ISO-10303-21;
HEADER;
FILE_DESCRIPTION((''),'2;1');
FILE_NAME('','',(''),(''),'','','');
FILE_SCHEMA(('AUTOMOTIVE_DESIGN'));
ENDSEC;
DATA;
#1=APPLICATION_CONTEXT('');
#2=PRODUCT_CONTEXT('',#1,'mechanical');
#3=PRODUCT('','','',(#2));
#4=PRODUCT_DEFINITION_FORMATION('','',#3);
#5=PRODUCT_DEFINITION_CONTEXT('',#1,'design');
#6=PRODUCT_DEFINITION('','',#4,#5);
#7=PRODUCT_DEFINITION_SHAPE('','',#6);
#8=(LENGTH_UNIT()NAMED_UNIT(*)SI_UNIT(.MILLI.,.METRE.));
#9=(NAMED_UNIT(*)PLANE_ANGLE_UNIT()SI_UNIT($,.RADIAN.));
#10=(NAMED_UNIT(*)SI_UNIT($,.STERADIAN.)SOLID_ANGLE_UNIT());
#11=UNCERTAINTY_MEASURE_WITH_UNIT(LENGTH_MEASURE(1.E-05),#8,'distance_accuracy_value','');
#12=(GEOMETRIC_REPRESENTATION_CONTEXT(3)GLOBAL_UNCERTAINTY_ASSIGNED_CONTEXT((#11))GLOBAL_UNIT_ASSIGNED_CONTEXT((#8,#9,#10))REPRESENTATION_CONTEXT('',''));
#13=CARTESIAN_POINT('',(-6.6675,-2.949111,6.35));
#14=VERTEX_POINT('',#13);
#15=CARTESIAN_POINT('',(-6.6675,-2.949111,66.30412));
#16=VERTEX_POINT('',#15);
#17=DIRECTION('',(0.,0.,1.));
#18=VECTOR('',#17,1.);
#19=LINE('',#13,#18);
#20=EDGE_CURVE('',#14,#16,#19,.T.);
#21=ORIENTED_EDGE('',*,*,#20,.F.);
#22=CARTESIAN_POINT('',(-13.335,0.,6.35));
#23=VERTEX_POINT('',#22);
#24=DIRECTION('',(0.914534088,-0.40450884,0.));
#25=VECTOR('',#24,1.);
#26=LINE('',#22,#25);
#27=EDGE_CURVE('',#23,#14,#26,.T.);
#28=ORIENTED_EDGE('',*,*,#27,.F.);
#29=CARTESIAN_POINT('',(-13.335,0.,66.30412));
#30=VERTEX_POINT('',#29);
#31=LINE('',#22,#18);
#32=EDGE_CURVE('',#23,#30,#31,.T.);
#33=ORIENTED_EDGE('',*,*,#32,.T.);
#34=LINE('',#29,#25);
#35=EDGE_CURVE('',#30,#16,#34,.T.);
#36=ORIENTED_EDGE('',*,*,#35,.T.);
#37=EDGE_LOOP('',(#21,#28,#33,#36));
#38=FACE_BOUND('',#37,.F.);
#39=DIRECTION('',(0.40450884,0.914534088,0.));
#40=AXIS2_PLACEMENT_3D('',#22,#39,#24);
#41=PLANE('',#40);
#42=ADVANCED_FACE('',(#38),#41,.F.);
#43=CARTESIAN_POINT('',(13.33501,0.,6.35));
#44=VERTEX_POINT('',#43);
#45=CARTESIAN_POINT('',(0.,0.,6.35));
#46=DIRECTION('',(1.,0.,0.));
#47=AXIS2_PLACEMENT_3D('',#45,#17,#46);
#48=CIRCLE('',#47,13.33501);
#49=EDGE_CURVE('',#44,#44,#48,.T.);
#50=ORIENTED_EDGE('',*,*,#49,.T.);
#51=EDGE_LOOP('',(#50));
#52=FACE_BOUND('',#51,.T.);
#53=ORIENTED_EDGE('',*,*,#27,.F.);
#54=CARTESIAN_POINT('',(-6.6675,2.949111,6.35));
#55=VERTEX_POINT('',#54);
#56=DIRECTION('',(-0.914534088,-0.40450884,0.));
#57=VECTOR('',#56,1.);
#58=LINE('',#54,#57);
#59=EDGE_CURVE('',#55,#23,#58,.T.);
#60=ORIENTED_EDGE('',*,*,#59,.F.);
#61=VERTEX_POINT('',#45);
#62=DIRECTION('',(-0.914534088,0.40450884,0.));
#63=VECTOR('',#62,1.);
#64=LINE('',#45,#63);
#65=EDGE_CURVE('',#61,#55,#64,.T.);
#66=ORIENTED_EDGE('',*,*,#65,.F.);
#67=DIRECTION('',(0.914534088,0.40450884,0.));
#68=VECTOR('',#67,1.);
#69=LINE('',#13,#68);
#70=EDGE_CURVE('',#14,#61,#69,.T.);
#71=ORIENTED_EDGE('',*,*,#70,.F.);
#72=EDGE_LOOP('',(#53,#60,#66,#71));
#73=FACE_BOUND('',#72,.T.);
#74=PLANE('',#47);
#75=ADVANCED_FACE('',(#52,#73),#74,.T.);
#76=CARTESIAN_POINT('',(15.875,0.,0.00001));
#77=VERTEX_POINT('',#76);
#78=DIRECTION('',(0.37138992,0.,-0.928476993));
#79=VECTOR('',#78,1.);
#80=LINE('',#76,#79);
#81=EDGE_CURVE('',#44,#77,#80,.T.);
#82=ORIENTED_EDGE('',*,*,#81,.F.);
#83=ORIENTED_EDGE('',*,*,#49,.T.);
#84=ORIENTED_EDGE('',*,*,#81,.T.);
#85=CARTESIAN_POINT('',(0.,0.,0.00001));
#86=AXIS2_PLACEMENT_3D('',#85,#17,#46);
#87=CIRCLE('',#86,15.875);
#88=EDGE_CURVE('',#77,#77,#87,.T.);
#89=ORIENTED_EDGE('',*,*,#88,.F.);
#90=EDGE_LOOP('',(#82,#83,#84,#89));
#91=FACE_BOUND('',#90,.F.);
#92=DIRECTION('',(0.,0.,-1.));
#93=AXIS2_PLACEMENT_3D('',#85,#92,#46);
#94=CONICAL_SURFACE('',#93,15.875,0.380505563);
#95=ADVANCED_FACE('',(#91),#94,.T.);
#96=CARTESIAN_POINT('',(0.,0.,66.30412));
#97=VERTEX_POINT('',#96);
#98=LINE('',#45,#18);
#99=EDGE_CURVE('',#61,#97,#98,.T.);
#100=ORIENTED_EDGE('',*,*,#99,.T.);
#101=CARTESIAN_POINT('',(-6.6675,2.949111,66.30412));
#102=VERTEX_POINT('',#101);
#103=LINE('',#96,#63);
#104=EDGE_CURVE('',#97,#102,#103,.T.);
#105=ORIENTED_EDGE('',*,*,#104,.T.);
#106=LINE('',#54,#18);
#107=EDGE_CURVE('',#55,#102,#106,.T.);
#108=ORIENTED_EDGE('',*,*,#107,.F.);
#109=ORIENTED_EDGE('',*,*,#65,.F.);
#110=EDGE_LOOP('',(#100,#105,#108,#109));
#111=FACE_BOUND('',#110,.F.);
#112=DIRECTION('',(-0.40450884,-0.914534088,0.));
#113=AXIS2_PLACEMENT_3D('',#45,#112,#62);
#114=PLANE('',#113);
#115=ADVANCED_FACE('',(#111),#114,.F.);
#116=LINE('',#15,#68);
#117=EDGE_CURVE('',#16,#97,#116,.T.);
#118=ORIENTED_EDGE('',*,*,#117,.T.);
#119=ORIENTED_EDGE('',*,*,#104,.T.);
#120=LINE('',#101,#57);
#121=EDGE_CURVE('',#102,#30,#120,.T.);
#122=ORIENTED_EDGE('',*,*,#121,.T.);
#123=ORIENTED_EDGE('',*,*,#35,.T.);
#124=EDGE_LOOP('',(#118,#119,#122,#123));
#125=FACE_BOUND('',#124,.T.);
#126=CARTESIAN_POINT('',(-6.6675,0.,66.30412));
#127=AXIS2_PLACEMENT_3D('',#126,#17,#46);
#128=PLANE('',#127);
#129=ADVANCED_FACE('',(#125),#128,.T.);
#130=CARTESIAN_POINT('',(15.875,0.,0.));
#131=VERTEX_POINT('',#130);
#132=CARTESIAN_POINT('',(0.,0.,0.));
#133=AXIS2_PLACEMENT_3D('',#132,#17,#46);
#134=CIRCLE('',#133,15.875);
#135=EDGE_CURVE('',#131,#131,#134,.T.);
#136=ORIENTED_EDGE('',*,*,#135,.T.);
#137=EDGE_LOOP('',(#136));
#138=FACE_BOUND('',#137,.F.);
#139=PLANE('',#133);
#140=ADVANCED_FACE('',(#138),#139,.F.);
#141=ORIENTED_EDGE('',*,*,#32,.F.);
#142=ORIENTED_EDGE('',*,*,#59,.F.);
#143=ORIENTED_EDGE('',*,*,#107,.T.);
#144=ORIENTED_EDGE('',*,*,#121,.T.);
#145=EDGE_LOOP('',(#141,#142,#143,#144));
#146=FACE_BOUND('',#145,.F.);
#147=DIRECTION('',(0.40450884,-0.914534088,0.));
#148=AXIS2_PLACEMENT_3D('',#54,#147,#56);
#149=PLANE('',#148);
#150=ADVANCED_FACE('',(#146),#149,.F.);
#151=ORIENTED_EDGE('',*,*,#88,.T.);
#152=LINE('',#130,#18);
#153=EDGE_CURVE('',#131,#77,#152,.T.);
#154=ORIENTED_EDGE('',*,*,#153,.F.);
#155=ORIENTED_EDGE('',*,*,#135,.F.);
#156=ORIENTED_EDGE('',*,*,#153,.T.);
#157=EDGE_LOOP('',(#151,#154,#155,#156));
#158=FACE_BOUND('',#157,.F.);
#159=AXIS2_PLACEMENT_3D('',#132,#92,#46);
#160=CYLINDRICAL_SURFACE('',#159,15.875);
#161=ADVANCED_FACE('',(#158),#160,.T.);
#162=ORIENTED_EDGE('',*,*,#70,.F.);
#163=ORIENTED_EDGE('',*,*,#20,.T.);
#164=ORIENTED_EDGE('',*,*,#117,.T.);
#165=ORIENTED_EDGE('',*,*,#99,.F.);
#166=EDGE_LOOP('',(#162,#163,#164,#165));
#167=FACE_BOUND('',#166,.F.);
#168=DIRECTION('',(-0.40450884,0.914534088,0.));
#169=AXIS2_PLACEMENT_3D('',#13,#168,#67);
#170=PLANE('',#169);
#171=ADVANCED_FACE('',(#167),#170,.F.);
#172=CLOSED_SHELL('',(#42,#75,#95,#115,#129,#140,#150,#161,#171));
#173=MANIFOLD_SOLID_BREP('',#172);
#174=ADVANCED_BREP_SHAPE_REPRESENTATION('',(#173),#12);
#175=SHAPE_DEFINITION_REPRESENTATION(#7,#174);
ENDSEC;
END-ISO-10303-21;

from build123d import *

# Parameters (mm, degrees)
F0_R     = 15.875
F1_DEPTH = 6.35
F2_SIZE2 = 6.34999
F2_SIZE  = 2.53999
F4_DEPTH = 59.95412


# Not quite as in the source:
# - a fillet or chamfer is up to 0.001 mm smaller than in the source, because OpenCascade refuses the exact size


with BuildPart() as f1:
    # F0 (on Top) → F1 (new body)
    with BuildSketch(Plane.XY):
        Circle(F0_R)
    extrude(amount=F1_DEPTH)

    # F2 (size 2.54 and 6.35 in the source; OpenCascade refuses exactly that, so slightly less here)
    f2_edges = [f1.edges().sort_by_distance(p)[0] for p in [
        (-15.875, 0, 6.35),
    ]]
    f2_side = f1.faces().sort_by_distance((0, 0, 6.35))[0]
    chamfer(f2_edges, length=F2_SIZE, length2=F2_SIZE2, reference=f2_side)

    # F3 (on face) → F4 (join)
    with BuildSketch(Plane.XY.offset(6.35)):
        Polygon((-6.6675, 2.9491111636), (-13.335, 0), (-6.6675, -2.9491111636), (0, 0), align=None)
    extrude(amount=F4_DEPTH)


solid = f1.part
